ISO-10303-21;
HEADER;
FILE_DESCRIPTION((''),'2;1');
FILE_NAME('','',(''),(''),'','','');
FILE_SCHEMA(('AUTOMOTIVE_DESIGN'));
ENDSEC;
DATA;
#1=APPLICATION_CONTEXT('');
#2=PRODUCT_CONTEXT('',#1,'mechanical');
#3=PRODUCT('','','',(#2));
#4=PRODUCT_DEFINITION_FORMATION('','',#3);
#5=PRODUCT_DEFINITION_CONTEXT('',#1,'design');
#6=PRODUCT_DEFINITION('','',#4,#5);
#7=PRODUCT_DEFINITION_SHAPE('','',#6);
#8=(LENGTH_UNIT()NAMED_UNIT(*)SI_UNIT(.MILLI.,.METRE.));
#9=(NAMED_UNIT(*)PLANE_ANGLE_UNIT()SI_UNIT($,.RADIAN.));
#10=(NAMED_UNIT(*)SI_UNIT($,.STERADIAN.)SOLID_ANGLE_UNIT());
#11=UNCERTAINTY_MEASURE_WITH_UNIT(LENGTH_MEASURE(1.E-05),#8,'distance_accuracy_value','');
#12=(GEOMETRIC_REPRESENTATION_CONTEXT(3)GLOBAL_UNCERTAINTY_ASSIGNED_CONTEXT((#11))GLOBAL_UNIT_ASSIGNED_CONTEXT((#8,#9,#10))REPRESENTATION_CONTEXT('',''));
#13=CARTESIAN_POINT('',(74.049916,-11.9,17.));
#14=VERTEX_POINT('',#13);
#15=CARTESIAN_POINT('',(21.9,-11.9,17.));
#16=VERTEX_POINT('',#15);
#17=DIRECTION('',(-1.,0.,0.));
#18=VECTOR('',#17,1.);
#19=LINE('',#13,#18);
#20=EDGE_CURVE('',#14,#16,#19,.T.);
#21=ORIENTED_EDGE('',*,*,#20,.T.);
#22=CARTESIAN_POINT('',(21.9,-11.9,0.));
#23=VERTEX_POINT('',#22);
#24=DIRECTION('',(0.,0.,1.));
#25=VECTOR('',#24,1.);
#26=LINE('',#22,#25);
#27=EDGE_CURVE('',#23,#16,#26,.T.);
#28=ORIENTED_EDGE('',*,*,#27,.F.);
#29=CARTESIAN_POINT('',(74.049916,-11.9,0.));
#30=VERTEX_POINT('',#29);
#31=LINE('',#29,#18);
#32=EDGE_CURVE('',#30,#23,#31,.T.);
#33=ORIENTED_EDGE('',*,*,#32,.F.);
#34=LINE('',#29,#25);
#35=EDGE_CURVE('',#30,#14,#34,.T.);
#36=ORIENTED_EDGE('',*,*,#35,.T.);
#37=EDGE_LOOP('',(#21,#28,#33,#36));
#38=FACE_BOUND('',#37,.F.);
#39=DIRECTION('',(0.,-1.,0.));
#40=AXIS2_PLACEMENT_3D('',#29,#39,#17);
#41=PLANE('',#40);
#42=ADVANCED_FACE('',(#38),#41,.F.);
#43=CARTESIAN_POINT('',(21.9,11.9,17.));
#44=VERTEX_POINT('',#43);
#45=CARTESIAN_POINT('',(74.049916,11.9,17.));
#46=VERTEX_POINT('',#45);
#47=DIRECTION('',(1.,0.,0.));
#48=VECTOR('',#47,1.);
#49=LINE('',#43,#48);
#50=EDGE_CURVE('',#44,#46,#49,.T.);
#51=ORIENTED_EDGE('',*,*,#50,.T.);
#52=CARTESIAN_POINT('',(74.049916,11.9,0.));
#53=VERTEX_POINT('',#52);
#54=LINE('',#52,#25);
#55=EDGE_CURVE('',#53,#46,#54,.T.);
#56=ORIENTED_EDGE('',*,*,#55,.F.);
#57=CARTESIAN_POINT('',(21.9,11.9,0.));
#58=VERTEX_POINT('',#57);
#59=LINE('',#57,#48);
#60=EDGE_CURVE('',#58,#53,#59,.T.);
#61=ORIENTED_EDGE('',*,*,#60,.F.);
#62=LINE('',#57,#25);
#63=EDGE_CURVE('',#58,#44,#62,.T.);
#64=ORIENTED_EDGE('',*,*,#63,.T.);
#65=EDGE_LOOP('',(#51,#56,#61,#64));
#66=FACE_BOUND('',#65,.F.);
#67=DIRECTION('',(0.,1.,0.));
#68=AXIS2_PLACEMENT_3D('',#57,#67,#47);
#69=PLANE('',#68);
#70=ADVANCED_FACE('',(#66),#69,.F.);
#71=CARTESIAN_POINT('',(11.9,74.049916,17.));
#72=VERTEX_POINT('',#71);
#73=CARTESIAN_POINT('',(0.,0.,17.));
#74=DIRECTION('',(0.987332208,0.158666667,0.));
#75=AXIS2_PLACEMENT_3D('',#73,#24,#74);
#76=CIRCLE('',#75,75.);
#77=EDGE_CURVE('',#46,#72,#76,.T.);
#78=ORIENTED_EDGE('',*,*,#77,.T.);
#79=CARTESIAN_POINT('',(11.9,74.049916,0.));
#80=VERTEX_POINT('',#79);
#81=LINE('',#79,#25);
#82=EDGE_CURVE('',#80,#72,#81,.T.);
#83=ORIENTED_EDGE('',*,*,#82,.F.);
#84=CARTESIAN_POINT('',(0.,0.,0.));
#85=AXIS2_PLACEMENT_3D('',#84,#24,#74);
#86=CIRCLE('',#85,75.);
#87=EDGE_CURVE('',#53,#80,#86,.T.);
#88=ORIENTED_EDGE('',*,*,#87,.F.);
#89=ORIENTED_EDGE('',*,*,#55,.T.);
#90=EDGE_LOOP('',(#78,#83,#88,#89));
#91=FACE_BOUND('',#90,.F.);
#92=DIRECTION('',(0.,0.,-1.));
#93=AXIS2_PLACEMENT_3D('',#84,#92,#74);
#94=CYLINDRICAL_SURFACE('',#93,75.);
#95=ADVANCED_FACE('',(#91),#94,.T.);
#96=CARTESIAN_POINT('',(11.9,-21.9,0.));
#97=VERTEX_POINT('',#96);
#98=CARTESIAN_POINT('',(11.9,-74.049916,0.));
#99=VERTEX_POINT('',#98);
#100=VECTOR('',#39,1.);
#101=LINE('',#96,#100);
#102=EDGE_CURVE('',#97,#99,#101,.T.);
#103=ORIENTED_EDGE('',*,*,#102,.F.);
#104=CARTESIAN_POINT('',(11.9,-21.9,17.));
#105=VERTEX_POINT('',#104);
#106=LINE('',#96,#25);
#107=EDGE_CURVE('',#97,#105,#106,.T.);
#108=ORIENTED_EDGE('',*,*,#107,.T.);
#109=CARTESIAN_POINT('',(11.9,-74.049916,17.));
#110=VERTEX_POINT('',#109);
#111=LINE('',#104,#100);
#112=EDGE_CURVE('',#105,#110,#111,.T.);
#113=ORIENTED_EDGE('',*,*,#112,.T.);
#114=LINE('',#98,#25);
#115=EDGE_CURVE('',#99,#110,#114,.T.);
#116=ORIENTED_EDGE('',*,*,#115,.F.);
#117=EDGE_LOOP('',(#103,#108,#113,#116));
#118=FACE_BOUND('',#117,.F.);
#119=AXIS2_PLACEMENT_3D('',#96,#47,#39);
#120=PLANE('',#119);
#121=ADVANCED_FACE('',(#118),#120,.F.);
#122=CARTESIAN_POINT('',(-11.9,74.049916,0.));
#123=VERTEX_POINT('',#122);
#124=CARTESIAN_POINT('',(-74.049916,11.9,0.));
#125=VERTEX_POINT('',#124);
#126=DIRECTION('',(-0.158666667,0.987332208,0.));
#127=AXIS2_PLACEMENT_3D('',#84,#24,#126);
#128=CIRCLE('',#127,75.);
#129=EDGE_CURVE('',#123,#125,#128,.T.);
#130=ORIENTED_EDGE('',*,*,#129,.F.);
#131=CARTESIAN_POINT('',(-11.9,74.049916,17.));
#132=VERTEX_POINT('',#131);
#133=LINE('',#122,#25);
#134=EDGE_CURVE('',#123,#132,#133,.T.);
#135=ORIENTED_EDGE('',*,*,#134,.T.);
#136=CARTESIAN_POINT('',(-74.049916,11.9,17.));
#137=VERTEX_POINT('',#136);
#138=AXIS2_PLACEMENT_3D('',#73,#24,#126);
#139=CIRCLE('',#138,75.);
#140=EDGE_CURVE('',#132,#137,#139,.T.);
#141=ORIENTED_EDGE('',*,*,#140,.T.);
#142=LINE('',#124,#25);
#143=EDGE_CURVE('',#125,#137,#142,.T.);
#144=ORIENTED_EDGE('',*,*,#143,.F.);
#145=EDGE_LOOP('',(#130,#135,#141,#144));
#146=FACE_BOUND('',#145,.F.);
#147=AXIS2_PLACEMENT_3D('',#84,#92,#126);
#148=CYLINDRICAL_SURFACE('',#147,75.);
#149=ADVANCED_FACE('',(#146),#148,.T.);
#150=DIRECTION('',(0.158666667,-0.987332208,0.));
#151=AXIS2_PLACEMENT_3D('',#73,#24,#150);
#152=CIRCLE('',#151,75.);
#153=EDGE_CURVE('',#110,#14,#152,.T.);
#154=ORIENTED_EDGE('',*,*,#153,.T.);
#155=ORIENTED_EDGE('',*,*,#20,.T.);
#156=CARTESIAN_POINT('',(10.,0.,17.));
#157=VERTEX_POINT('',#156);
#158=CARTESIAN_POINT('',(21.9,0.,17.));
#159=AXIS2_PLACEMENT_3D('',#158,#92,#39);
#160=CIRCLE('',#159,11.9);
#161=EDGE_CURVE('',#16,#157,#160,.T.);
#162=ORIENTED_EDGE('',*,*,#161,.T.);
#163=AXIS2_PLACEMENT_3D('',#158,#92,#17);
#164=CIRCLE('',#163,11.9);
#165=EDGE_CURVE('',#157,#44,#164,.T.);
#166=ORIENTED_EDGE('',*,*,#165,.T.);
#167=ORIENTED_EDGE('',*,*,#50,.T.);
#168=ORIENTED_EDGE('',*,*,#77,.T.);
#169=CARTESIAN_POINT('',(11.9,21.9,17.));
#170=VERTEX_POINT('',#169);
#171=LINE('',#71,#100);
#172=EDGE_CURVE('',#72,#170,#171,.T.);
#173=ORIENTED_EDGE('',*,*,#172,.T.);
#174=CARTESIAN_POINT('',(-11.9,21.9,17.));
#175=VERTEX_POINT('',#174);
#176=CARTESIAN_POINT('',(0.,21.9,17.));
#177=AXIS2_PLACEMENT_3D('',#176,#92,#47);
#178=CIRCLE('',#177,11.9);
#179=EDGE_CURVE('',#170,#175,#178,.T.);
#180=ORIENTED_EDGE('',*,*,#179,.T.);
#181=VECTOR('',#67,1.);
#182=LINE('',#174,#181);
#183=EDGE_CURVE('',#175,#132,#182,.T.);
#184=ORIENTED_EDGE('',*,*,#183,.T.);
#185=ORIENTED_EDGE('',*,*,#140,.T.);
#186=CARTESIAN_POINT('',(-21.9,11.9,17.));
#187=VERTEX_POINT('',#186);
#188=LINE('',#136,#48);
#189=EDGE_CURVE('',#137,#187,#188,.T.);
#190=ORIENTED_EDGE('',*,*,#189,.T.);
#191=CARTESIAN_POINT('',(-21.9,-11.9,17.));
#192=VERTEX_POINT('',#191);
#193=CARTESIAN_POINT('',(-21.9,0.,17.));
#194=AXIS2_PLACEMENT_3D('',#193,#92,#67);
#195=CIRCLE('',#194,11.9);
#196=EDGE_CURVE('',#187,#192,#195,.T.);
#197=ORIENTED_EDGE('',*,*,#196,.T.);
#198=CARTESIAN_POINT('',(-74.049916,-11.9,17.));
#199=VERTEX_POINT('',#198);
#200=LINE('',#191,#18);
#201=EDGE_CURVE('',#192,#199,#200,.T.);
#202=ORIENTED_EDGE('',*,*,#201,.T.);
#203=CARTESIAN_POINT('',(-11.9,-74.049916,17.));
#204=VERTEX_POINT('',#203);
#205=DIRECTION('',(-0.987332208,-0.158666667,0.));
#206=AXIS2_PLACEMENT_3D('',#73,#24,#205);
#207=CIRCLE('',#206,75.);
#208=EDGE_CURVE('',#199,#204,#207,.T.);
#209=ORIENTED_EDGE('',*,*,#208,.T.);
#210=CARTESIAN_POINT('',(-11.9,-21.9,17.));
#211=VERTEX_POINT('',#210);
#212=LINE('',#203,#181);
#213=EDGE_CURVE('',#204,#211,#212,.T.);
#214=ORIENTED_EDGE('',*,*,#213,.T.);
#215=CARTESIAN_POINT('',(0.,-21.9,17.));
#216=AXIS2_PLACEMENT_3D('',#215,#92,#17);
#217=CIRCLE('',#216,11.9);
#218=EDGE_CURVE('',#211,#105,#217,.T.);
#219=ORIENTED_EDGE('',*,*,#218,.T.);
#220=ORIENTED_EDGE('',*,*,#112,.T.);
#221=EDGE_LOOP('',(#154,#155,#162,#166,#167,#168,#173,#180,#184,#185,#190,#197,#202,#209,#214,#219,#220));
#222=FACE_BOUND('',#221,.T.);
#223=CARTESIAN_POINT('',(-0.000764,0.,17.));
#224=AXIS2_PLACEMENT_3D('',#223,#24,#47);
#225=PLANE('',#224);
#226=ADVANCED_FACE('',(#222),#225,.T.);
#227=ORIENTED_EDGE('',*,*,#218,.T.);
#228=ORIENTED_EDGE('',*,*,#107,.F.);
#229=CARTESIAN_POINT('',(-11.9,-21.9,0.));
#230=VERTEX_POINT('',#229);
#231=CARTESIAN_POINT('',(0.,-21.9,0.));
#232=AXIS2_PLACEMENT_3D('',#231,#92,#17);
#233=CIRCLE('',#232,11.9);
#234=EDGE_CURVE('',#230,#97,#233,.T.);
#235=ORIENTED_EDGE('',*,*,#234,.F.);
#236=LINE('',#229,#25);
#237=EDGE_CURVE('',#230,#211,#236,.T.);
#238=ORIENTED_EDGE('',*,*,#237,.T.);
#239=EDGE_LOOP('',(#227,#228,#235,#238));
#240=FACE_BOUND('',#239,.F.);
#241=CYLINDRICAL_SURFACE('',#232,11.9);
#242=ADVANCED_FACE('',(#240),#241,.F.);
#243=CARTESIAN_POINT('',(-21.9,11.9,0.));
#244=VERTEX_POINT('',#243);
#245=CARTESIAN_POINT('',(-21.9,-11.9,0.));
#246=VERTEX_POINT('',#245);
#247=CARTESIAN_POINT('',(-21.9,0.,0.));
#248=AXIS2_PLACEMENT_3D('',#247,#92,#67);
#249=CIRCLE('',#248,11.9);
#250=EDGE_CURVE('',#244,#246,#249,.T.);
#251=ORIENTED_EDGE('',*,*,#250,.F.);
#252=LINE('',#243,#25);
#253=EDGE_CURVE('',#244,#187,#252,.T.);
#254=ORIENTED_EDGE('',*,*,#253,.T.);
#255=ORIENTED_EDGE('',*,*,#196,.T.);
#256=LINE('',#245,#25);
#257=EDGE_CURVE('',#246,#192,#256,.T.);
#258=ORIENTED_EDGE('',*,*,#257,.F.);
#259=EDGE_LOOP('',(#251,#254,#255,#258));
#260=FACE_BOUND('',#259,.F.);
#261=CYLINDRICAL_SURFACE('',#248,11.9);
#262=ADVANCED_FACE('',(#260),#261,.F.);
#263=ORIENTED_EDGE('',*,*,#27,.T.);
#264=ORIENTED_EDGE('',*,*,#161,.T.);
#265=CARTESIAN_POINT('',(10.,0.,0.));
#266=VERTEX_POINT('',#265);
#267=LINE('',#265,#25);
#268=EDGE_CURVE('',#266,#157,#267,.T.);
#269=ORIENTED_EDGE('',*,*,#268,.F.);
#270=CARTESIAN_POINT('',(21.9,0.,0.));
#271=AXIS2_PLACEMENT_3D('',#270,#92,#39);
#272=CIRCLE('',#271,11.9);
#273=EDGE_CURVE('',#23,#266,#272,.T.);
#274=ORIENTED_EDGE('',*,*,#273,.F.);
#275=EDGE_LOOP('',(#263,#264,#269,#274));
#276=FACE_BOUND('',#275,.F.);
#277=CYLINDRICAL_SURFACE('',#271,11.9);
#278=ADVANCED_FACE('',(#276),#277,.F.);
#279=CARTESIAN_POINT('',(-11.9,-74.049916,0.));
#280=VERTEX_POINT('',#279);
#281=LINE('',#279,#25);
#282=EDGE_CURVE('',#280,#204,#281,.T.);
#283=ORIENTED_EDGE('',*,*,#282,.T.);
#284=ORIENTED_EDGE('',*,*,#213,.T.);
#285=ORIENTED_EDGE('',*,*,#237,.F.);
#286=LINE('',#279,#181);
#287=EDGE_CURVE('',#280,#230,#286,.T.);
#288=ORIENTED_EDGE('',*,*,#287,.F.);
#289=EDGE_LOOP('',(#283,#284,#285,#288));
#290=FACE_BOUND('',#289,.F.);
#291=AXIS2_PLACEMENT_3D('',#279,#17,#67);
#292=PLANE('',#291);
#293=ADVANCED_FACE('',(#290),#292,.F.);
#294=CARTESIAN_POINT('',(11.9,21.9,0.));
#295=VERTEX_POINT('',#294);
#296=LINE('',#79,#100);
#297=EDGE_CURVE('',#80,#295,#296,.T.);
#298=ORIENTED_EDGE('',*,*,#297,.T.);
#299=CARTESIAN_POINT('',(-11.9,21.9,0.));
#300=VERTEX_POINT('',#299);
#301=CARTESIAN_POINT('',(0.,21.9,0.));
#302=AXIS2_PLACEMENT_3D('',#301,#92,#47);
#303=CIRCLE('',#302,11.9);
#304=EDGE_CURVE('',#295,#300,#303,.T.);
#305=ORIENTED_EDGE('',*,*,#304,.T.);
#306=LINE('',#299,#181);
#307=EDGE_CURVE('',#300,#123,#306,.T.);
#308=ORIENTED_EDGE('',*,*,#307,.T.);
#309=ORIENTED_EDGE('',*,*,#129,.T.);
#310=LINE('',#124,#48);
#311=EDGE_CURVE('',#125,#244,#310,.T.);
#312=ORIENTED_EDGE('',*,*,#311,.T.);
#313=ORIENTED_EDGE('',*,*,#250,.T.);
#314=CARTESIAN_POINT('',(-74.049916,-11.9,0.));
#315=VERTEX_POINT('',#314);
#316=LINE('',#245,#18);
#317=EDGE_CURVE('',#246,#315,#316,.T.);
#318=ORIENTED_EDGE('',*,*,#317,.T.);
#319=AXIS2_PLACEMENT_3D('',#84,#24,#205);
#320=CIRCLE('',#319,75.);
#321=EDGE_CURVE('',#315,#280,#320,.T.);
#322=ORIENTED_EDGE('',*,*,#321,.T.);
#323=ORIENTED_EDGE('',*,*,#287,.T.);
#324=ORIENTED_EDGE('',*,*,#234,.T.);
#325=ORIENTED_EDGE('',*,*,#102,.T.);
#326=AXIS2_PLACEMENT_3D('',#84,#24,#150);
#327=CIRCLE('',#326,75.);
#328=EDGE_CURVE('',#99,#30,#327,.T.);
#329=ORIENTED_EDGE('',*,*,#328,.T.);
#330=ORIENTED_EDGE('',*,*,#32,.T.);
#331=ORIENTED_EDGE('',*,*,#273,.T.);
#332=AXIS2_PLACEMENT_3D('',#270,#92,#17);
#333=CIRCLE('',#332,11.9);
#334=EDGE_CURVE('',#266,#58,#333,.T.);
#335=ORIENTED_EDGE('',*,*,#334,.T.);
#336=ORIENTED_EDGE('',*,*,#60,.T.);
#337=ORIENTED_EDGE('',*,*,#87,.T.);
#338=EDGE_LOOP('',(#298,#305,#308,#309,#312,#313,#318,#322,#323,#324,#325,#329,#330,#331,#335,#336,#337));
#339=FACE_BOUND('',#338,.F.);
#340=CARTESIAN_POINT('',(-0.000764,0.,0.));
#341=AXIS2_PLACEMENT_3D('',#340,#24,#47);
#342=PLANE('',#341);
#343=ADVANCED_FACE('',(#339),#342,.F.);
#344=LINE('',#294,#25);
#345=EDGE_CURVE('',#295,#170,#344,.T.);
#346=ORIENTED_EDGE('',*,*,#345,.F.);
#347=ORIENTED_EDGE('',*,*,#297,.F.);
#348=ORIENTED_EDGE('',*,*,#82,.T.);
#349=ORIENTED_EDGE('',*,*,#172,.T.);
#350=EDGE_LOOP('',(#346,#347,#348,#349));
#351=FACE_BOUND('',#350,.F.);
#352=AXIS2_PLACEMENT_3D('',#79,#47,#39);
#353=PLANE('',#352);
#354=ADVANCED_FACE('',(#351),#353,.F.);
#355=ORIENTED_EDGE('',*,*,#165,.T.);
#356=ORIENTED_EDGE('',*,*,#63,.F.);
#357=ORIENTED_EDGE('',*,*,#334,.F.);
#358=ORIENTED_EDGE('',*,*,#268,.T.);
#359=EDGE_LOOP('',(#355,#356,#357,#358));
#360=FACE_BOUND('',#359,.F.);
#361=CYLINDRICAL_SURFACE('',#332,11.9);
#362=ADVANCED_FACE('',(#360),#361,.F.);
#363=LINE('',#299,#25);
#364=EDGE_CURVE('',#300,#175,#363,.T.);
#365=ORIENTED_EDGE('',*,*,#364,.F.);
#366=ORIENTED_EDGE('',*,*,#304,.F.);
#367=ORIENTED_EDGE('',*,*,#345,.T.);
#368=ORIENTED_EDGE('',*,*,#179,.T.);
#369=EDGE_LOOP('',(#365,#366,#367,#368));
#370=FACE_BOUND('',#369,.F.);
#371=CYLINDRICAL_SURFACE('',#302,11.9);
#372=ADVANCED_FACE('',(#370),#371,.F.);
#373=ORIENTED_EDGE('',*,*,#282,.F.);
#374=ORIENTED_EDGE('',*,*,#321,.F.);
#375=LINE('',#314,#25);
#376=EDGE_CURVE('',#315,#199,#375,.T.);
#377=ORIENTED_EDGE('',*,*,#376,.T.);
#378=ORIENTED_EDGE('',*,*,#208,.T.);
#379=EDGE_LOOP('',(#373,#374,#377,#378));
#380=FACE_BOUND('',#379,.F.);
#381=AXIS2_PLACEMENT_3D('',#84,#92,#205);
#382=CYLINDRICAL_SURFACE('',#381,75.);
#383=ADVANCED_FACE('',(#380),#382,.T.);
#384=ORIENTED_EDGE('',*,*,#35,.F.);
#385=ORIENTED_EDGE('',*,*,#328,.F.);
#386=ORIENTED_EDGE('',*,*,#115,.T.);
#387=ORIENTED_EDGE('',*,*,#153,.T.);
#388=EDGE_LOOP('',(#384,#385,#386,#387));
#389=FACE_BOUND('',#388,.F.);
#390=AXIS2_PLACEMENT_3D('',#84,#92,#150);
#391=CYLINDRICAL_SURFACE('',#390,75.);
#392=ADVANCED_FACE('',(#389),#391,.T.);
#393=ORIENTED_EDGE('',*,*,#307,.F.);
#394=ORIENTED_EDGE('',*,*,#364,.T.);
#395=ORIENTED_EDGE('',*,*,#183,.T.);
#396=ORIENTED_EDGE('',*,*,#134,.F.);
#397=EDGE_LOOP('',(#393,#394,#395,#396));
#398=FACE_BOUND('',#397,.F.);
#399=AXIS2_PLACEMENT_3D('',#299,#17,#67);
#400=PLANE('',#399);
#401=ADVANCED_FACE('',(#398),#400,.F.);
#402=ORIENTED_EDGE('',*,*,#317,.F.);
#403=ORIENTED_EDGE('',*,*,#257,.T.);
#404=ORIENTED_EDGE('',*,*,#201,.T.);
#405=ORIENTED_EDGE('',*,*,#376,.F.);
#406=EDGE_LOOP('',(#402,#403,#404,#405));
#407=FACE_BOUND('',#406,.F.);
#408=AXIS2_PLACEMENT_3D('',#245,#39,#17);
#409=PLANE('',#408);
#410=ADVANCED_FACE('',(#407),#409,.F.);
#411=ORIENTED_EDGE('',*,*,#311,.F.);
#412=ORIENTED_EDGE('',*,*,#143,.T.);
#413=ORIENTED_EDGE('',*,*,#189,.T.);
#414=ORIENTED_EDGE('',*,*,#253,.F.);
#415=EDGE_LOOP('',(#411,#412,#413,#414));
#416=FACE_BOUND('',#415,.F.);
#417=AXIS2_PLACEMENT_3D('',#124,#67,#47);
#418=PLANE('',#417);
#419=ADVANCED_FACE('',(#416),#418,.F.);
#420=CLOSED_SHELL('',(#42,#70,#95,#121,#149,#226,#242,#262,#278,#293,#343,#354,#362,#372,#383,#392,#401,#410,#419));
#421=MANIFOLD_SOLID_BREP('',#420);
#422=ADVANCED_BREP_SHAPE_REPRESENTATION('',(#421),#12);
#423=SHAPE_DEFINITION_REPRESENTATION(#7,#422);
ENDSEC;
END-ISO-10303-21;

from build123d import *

# Parameters (mm, degrees)
F1_DEPTH = 17


# Not quite as in the source:
# - a feature of the source that left no trace in its solid (it failed there, or was rolled back) is left out


with BuildPart() as f1:
    # F0 (on Top) → F1 (new body)
    with BuildSketch(Plane.XY):
        with BuildLine():
            Line((21.9, 11.9), (74.0499155975, 11.9))
            ThreePointArc((74.0499155975, 11.9), (53.033008589, 53.033008589), (11.9, 74.0499155975))
            Line((11.9, 74.0499155975), (11.9, 21.9))
            ThreePointArc((11.9, 21.9), (0, 10), (-11.9, 21.9))
            Line((-11.9, 21.9), (-11.9, 74.0499155975))
            ThreePointArc((-11.9, 74.0499155975), (-53.033008589, 53.033008589), (-74.0499155975, 11.9))
            Line((-74.0499155975, 11.9), (-21.9, 11.9))
            ThreePointArc((-21.9, 11.9), (-10, 0), (-21.9, -11.9))
            Line((-21.9, -11.9), (-74.0499155975, -11.9))
            ThreePointArc((-74.0499155975, -11.9), (-53.033008589, -53.033008589), (-11.9, -74.0499155975))
            Line((-11.9, -74.0499155975), (-11.9, -21.9))
            ThreePointArc((-11.9, -21.9), (0, -10), (11.9, -21.9))
            Line((11.9, -21.9), (11.9, -74.0499155975))
            ThreePointArc((11.9, -74.0499155975), (53.033008589, -53.033008589), (74.0499155975, -11.9))
            Line((74.0499155975, -11.9), (21.9, -11.9))
            ThreePointArc((21.9, -11.9), (13.4854293039, -8.4145706961), (10, 0))
            ThreePointArc((10, 0), (13.4854293039, 8.4145706961), (21.9, 11.9))
        make_face()
    extrude(amount=F1_DEPTH)


solid = f1.part
